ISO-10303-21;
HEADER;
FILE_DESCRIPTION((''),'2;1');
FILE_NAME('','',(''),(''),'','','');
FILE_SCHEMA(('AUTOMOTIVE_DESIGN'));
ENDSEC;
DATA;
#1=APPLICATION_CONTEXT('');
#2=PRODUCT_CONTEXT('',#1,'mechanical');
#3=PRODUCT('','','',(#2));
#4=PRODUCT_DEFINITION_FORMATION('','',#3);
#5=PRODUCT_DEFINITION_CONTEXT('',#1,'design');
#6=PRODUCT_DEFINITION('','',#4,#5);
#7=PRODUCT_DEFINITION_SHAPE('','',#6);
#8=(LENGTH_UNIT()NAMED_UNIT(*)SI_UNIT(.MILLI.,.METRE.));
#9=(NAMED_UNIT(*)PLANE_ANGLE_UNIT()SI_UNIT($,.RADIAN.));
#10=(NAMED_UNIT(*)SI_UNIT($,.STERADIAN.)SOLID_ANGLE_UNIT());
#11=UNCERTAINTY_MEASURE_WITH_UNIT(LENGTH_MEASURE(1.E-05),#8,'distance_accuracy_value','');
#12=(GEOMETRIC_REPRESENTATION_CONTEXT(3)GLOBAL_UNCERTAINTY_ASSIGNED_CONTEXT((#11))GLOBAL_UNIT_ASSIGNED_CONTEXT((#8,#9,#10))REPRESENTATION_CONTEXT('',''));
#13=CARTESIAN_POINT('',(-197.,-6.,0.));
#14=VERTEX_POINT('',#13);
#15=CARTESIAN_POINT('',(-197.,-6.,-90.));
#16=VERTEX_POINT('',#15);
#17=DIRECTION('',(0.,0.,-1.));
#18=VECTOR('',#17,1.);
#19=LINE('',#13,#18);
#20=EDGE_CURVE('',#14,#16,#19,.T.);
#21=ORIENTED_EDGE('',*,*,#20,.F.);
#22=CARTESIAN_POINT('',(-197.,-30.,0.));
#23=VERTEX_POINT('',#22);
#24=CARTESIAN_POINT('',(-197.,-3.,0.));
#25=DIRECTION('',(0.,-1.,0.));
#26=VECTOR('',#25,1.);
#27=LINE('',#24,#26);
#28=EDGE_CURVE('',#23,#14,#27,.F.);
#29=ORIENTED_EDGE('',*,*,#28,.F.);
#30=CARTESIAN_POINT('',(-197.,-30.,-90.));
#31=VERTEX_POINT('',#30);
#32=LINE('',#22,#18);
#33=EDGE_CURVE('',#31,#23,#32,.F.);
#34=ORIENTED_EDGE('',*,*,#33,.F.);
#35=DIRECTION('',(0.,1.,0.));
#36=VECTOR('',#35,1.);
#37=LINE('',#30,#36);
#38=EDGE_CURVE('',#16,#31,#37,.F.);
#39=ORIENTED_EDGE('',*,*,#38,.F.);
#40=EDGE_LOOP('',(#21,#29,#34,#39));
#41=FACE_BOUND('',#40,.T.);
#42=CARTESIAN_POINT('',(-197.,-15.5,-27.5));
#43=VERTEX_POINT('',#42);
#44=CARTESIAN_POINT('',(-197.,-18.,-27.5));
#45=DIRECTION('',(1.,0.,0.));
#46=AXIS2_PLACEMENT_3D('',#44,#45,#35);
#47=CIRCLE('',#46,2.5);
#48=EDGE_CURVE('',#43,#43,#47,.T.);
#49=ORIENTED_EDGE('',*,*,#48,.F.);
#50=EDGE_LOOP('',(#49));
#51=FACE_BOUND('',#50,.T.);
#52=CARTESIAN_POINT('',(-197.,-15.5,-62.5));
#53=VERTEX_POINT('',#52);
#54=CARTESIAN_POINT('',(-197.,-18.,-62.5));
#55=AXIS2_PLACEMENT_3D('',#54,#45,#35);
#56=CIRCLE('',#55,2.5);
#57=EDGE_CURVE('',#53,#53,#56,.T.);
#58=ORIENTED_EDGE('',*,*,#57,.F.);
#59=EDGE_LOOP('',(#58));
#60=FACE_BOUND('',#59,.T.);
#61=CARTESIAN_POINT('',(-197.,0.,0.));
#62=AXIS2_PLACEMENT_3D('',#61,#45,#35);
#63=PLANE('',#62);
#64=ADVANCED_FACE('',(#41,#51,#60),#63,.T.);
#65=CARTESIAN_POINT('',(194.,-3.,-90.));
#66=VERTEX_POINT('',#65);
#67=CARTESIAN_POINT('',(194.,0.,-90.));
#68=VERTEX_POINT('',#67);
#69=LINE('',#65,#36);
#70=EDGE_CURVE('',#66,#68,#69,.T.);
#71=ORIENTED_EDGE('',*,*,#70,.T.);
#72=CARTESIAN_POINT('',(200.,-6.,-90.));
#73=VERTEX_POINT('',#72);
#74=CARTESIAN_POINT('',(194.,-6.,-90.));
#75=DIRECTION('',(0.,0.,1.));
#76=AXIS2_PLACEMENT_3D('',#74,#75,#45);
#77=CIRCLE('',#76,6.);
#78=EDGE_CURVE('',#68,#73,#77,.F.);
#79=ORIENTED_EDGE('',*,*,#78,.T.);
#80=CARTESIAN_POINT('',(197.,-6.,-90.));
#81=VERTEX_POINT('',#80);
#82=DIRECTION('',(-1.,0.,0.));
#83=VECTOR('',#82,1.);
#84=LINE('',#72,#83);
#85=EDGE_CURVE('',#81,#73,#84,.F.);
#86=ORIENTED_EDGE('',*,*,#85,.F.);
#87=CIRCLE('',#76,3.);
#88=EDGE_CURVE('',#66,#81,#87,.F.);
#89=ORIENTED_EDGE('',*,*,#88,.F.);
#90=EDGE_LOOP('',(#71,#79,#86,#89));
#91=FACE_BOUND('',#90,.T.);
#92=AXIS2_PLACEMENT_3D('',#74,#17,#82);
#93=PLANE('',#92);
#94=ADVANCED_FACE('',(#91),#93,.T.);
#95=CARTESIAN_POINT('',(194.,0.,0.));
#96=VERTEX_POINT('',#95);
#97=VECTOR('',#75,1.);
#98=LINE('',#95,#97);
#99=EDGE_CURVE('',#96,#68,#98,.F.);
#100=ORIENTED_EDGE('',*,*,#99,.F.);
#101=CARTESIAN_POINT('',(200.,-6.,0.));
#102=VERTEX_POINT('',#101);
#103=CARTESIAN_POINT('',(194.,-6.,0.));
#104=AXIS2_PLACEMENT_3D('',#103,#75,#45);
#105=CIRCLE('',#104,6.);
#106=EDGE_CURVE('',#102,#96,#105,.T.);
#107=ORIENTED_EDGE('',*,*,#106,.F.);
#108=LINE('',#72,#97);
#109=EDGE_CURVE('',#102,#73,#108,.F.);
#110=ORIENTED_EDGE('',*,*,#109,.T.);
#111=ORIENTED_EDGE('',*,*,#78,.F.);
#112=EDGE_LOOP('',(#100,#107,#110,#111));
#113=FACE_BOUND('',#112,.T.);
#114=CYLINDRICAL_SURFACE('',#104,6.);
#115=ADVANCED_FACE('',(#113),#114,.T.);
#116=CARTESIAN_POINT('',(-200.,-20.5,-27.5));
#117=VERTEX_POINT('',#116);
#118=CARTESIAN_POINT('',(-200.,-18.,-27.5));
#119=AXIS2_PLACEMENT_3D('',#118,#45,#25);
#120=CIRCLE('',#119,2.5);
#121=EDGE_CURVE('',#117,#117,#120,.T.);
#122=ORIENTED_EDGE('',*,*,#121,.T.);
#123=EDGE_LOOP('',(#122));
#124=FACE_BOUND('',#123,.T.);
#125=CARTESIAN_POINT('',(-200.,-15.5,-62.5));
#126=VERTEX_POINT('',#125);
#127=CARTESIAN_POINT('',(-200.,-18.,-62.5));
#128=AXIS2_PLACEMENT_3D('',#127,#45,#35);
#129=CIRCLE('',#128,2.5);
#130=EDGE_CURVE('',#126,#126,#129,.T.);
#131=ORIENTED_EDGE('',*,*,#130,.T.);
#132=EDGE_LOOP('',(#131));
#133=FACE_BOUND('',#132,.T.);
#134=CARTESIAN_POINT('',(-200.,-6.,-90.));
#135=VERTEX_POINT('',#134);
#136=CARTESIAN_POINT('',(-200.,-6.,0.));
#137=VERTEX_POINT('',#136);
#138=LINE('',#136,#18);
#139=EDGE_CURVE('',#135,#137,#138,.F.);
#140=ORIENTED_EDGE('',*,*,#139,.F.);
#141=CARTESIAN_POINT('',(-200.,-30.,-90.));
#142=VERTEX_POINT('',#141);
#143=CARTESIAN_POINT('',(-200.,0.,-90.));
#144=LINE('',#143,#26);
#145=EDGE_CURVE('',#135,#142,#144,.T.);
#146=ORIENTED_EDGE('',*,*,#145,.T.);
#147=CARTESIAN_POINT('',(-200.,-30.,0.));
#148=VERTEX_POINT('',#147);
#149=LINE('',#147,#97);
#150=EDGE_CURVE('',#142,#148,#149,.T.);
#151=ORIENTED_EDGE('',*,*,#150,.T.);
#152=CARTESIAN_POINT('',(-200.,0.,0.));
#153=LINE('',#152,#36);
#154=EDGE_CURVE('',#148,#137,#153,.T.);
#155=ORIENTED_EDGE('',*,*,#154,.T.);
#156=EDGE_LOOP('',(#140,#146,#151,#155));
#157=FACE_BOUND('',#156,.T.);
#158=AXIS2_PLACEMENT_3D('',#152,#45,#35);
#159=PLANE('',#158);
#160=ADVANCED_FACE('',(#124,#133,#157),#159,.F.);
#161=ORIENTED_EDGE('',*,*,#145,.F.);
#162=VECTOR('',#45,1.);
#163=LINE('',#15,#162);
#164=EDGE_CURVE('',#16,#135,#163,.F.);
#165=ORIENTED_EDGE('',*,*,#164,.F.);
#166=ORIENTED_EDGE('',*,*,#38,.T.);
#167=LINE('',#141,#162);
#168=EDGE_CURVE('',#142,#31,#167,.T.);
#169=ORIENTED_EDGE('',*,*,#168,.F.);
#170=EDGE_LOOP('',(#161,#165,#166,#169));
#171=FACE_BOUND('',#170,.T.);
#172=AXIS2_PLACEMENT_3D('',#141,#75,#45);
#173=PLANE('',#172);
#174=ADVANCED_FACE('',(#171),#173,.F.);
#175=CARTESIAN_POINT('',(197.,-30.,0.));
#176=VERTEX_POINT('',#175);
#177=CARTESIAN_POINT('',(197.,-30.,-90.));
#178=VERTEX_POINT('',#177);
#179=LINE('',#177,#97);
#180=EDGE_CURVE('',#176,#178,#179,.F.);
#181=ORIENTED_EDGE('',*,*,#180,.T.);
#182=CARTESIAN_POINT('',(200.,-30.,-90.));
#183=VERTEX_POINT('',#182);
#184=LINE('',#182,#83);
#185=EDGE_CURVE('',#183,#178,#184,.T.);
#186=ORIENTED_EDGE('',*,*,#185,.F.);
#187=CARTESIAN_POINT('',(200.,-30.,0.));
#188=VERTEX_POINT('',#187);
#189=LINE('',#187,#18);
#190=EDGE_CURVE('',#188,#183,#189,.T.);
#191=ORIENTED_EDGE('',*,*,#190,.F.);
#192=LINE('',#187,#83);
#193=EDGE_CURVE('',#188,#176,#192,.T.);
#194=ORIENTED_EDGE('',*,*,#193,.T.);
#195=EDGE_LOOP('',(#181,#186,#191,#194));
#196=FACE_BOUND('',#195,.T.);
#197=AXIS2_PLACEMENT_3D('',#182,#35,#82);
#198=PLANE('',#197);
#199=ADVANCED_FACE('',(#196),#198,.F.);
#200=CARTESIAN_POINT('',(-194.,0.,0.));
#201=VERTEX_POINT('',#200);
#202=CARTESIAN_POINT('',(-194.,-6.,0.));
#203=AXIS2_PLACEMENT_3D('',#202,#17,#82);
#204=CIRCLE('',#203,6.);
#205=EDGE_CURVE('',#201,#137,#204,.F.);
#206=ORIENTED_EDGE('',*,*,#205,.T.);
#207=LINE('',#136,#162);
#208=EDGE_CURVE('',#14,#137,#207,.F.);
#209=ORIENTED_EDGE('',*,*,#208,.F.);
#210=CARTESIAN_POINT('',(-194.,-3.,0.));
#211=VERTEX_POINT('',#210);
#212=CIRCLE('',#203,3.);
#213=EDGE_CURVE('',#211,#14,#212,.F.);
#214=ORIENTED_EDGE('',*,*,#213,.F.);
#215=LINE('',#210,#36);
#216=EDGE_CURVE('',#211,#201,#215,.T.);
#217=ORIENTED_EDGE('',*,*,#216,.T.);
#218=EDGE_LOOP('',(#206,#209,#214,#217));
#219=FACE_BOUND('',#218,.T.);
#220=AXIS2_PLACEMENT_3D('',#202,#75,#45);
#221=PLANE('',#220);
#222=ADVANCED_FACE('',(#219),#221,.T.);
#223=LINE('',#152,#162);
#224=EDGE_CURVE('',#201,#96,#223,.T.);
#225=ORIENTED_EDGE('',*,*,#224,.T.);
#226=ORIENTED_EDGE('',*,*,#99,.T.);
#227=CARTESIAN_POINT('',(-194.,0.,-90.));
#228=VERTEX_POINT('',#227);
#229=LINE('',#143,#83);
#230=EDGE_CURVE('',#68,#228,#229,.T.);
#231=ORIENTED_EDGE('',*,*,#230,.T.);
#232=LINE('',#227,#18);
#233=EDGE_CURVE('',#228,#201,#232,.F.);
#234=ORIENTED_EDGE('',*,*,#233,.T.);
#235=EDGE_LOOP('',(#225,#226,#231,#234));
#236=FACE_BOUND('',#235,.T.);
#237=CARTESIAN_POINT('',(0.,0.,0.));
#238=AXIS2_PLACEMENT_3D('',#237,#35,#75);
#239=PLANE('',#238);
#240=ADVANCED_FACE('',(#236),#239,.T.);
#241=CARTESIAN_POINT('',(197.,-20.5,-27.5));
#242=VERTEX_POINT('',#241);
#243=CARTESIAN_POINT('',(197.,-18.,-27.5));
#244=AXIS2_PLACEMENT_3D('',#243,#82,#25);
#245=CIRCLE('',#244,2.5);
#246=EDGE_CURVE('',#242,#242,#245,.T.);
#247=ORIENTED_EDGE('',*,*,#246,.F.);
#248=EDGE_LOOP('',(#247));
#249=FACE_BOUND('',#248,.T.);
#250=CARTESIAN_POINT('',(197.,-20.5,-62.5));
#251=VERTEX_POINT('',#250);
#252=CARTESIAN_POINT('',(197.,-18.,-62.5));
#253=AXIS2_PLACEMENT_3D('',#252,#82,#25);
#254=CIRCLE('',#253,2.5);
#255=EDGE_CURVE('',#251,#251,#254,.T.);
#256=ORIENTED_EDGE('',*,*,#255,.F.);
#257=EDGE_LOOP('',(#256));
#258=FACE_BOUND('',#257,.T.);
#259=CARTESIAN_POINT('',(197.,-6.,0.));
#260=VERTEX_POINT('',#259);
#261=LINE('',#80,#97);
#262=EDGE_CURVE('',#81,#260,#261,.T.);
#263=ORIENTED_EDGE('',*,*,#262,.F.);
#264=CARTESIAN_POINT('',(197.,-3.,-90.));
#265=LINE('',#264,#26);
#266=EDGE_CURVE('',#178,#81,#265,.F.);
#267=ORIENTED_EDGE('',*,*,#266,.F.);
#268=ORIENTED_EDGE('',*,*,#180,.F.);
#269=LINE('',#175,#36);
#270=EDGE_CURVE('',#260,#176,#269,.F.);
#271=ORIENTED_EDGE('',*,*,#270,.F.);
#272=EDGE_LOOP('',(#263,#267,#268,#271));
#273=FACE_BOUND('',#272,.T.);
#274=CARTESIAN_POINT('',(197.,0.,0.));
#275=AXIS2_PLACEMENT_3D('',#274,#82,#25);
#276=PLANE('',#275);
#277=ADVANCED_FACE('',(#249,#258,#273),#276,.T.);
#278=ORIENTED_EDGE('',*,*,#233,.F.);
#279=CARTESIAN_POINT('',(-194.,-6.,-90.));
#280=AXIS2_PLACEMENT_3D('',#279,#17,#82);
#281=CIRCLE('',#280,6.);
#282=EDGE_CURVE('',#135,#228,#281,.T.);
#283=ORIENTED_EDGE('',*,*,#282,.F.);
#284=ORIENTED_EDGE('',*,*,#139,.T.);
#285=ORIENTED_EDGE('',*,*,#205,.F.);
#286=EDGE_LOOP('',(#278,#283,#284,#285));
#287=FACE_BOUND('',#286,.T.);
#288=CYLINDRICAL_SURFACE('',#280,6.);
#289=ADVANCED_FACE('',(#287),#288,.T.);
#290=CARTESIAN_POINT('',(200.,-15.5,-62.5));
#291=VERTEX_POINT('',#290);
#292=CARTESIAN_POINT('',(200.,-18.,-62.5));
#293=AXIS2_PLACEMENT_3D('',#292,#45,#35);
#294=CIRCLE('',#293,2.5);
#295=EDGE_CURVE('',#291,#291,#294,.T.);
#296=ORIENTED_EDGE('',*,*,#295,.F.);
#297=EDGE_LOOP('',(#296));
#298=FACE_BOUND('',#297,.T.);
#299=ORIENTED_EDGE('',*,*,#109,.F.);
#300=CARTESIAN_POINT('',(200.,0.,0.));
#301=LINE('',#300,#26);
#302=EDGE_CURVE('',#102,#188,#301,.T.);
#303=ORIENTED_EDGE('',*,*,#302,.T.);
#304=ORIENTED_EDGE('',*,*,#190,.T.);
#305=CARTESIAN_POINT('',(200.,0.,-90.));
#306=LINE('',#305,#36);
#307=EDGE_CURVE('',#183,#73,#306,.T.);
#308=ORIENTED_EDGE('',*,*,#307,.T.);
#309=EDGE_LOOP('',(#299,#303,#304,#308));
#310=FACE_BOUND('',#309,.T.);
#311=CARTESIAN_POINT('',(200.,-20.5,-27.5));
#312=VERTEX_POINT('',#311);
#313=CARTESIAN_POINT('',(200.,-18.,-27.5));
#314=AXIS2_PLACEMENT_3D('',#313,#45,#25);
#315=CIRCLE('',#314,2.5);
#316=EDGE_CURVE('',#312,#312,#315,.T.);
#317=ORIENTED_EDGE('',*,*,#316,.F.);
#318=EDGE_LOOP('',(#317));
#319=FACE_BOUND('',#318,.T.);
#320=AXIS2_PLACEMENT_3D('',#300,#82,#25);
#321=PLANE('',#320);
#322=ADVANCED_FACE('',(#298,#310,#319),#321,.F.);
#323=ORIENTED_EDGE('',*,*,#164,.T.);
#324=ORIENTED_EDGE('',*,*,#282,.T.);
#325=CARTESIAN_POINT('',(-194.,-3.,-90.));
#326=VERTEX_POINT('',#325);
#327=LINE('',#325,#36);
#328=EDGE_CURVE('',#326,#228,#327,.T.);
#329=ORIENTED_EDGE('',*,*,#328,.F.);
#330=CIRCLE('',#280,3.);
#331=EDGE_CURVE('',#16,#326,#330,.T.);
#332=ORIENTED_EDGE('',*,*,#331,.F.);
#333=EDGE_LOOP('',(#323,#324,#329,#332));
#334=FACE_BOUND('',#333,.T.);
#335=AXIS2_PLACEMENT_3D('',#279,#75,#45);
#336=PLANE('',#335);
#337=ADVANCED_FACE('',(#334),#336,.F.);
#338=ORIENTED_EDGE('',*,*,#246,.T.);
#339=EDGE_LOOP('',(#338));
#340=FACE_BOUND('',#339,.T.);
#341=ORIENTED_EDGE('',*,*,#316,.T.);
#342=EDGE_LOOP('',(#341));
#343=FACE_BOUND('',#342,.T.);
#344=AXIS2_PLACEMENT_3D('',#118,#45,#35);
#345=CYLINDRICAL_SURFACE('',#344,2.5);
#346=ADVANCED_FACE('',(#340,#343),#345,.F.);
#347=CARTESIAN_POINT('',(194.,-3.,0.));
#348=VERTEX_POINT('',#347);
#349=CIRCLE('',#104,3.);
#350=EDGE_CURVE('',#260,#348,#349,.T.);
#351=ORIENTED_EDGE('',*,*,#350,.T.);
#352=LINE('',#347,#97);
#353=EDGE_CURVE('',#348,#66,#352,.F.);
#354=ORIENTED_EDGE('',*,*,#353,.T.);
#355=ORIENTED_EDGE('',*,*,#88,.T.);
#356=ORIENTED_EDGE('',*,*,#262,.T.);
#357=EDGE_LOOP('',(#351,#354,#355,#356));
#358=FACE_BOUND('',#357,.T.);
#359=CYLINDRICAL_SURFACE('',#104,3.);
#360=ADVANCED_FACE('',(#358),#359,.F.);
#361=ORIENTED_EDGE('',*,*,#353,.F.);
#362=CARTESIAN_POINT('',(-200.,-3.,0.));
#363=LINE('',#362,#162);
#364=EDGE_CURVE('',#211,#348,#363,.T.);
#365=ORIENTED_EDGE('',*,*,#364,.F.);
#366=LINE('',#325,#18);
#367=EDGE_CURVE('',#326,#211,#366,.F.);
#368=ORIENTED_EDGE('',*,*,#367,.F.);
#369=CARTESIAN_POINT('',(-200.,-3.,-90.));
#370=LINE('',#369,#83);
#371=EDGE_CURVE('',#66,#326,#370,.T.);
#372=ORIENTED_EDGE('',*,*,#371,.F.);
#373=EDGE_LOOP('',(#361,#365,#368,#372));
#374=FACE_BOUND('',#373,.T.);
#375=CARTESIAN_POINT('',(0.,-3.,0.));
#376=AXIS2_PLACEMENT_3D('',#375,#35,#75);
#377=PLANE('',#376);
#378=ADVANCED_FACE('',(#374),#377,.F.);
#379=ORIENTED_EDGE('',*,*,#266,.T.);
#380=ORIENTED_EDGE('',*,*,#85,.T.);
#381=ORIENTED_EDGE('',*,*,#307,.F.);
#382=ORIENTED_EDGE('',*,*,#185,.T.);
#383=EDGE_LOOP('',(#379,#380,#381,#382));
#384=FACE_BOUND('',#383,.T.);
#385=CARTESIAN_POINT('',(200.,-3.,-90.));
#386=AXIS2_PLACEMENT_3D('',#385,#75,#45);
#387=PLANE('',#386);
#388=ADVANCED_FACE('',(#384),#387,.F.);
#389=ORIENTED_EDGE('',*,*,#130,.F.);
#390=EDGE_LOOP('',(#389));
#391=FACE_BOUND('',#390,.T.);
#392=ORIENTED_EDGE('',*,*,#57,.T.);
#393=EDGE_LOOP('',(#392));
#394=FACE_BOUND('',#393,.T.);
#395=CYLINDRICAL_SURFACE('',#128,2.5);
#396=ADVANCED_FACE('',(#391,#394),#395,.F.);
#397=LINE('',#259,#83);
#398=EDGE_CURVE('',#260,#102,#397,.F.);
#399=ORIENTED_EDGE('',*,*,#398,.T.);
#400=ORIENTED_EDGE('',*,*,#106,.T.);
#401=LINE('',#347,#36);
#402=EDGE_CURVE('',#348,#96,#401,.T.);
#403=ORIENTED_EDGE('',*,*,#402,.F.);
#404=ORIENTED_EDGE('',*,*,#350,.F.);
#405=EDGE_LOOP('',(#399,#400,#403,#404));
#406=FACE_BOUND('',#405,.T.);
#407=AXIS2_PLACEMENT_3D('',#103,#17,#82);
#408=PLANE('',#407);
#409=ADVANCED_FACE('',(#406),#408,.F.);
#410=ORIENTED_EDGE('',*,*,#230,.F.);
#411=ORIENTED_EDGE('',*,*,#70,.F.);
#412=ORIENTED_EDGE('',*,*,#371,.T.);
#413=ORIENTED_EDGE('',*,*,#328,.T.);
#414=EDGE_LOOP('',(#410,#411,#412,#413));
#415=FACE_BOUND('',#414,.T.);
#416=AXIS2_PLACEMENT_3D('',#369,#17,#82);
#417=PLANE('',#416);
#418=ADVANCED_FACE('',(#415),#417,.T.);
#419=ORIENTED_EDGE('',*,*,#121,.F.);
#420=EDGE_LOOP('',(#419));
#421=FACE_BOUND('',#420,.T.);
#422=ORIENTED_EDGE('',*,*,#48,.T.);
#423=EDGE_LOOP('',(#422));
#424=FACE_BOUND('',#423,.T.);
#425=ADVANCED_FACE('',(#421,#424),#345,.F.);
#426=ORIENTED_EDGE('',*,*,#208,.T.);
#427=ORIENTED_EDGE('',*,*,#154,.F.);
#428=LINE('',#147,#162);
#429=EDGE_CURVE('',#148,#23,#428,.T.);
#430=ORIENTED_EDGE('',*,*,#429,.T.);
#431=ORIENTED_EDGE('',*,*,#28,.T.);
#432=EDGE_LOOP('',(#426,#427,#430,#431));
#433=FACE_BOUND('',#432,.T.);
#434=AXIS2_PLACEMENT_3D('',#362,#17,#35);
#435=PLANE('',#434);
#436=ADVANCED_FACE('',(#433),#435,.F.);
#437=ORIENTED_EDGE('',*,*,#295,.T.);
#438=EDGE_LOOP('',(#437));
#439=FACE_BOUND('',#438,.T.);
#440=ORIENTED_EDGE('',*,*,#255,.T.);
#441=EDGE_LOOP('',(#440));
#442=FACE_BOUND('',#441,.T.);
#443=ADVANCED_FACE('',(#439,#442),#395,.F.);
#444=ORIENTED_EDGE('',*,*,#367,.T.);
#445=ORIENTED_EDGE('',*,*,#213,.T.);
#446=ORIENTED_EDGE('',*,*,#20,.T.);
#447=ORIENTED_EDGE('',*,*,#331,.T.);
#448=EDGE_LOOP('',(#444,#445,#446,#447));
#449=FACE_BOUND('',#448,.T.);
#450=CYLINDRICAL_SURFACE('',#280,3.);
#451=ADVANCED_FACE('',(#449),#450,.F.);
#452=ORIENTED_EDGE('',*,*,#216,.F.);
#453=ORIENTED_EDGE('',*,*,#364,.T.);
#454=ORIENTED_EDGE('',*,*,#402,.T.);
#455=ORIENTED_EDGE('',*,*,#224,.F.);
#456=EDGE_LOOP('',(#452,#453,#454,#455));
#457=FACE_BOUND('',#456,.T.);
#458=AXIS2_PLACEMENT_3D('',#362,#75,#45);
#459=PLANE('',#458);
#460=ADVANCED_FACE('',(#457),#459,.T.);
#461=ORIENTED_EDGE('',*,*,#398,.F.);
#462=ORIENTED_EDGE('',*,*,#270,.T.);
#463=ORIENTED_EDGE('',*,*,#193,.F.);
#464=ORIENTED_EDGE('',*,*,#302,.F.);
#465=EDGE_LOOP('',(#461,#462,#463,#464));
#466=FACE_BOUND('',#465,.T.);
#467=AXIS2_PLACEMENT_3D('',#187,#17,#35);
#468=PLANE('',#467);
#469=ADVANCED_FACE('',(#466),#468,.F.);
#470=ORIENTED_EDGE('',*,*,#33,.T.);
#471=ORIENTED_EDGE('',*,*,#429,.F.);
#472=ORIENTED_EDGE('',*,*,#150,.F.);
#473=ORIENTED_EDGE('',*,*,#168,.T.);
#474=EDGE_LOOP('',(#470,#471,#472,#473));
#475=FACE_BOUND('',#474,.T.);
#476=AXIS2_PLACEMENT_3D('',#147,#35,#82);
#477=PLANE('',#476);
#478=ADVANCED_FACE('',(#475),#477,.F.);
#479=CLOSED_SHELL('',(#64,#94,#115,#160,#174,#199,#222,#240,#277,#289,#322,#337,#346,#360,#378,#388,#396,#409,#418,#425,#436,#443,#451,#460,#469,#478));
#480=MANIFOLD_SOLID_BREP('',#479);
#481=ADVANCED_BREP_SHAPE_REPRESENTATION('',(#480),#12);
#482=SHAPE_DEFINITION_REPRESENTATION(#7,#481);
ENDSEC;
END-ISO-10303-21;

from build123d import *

# Parameters (mm, degrees)
SKETCH1_W                      = 400
SKETCH1_H                      = 90
BASE_FLANGE1_DEPTH             = 3
EDGE_FLANGE1_STRIP_W           = 18
EDGE_FLANGE1_STRIP_H           = 3
EDGE_FLANGE1_STRIP_CUT_DEPTH   = 90
EDGE_FLANGE1_STRIP_2_W         = 18
EDGE_FLANGE1_STRIP_2_H         = 3
EDGE_FLANGE1_STRIP_CUT_2_DEPTH = 90
EDGE_FLANGE1_DEPTH             = 90
EDGE_FLANGE1_BEND_DEPTH        = 90
SKETCH12_R                     = 2.5
CUT_EXTRUDE1_DEPTH             = 412.096095822


# Sheet-metal steps are written as plain solids
with BuildPart() as part:
    # Sketch1 → Base-Flange1 (new body)
    with BuildSketch(Plane(origin=(0, 0, 0), x_dir=(1, 0, 0), z_dir=(0, 1, 0))):
        with Locations((0, 45)):
            Rectangle(SKETCH1_W, SKETCH1_H)
    extrude(amount=-BASE_FLANGE1_DEPTH)

    # Edge-Flange1 strip (across the edge) → Edge-Flange1 strip cut (cut)
    with BuildSketch(Plane(origin=(-200, -3, 0), x_dir=(1, 0, 0), z_dir=(0, 0, -1))):
        with Locations((-3, -1.5)):
            Rectangle(EDGE_FLANGE1_STRIP_W, EDGE_FLANGE1_STRIP_H)
    extrude(amount=EDGE_FLANGE1_STRIP_CUT_DEPTH, mode=Mode.SUBTRACT)

    # Edge-Flange1 strip 2 (across the edge) → Edge-Flange1 strip cut 2 (cut)
    with BuildSketch(Plane(origin=(200, -3, -90), x_dir=(-1, 0, 0), z_dir=(0, 0, 1))):
        with Locations((-3, -1.5)):
            Rectangle(EDGE_FLANGE1_STRIP_2_W, EDGE_FLANGE1_STRIP_2_H)
    extrude(amount=EDGE_FLANGE1_STRIP_CUT_2_DEPTH, mode=Mode.SUBTRACT)

    # Edge-Flange1 section (across the edge) → Edge-Flange1 (add)
    with BuildSketch(Plane(origin=(-200, -3, 0), x_dir=(1, 0, 0), z_dir=(0, 0, -1))):
        with BuildLine():
            Line((0, 3), (0, 27))
            Line((0, 27), (3, 27))
            Line((3, 27), (3, 3))
            ThreePointArc((3, 3), (3.878679656, 0.878679656), (6, 0))
            Line((6, 0), (6, -3))
            ThreePointArc((6, -3), (1.757359313, -1.242640687), (0, 3))
        make_face()
    extrude(amount=EDGE_FLANGE1_DEPTH)

    # Edge-Flange1 section 2 (across the edge) → Edge-Flange1 bend (add)
    with BuildSketch(Plane(origin=(200, -3, -90), x_dir=(-1, 0, 0), z_dir=(0, 0, 1))):
        with BuildLine():
            Line((0, 3), (0, 27))
            Line((0, 27), (3, 27))
            Line((3, 27), (3, 3))
            ThreePointArc((3, 3), (3.878679656, 0.878679656), (6, 0))
            Line((6, 0), (6, -3))
            ThreePointArc((6, -3), (1.757359313, -1.242640687), (0, 3))
        make_face()
    extrude(amount=EDGE_FLANGE1_BEND_DEPTH)

    # Sketch12 → Cut-Extrude1 (cut, through all)
    with BuildSketch(Plane(origin=(200, 0, 0), x_dir=(0, 0, -1), z_dir=(1, 0, 0))):
        with Locations(Location((62.5, -18, 0), (0, 0, 90))):
            Circle(SKETCH12_R)
        with Locations(Location((27.5, -18, 0), (0, 0, 270))):
            Circle(SKETCH12_R)
    extrude(amount=-CUT_EXTRUDE1_DEPTH, mode=Mode.SUBTRACT)


solid = part.part
